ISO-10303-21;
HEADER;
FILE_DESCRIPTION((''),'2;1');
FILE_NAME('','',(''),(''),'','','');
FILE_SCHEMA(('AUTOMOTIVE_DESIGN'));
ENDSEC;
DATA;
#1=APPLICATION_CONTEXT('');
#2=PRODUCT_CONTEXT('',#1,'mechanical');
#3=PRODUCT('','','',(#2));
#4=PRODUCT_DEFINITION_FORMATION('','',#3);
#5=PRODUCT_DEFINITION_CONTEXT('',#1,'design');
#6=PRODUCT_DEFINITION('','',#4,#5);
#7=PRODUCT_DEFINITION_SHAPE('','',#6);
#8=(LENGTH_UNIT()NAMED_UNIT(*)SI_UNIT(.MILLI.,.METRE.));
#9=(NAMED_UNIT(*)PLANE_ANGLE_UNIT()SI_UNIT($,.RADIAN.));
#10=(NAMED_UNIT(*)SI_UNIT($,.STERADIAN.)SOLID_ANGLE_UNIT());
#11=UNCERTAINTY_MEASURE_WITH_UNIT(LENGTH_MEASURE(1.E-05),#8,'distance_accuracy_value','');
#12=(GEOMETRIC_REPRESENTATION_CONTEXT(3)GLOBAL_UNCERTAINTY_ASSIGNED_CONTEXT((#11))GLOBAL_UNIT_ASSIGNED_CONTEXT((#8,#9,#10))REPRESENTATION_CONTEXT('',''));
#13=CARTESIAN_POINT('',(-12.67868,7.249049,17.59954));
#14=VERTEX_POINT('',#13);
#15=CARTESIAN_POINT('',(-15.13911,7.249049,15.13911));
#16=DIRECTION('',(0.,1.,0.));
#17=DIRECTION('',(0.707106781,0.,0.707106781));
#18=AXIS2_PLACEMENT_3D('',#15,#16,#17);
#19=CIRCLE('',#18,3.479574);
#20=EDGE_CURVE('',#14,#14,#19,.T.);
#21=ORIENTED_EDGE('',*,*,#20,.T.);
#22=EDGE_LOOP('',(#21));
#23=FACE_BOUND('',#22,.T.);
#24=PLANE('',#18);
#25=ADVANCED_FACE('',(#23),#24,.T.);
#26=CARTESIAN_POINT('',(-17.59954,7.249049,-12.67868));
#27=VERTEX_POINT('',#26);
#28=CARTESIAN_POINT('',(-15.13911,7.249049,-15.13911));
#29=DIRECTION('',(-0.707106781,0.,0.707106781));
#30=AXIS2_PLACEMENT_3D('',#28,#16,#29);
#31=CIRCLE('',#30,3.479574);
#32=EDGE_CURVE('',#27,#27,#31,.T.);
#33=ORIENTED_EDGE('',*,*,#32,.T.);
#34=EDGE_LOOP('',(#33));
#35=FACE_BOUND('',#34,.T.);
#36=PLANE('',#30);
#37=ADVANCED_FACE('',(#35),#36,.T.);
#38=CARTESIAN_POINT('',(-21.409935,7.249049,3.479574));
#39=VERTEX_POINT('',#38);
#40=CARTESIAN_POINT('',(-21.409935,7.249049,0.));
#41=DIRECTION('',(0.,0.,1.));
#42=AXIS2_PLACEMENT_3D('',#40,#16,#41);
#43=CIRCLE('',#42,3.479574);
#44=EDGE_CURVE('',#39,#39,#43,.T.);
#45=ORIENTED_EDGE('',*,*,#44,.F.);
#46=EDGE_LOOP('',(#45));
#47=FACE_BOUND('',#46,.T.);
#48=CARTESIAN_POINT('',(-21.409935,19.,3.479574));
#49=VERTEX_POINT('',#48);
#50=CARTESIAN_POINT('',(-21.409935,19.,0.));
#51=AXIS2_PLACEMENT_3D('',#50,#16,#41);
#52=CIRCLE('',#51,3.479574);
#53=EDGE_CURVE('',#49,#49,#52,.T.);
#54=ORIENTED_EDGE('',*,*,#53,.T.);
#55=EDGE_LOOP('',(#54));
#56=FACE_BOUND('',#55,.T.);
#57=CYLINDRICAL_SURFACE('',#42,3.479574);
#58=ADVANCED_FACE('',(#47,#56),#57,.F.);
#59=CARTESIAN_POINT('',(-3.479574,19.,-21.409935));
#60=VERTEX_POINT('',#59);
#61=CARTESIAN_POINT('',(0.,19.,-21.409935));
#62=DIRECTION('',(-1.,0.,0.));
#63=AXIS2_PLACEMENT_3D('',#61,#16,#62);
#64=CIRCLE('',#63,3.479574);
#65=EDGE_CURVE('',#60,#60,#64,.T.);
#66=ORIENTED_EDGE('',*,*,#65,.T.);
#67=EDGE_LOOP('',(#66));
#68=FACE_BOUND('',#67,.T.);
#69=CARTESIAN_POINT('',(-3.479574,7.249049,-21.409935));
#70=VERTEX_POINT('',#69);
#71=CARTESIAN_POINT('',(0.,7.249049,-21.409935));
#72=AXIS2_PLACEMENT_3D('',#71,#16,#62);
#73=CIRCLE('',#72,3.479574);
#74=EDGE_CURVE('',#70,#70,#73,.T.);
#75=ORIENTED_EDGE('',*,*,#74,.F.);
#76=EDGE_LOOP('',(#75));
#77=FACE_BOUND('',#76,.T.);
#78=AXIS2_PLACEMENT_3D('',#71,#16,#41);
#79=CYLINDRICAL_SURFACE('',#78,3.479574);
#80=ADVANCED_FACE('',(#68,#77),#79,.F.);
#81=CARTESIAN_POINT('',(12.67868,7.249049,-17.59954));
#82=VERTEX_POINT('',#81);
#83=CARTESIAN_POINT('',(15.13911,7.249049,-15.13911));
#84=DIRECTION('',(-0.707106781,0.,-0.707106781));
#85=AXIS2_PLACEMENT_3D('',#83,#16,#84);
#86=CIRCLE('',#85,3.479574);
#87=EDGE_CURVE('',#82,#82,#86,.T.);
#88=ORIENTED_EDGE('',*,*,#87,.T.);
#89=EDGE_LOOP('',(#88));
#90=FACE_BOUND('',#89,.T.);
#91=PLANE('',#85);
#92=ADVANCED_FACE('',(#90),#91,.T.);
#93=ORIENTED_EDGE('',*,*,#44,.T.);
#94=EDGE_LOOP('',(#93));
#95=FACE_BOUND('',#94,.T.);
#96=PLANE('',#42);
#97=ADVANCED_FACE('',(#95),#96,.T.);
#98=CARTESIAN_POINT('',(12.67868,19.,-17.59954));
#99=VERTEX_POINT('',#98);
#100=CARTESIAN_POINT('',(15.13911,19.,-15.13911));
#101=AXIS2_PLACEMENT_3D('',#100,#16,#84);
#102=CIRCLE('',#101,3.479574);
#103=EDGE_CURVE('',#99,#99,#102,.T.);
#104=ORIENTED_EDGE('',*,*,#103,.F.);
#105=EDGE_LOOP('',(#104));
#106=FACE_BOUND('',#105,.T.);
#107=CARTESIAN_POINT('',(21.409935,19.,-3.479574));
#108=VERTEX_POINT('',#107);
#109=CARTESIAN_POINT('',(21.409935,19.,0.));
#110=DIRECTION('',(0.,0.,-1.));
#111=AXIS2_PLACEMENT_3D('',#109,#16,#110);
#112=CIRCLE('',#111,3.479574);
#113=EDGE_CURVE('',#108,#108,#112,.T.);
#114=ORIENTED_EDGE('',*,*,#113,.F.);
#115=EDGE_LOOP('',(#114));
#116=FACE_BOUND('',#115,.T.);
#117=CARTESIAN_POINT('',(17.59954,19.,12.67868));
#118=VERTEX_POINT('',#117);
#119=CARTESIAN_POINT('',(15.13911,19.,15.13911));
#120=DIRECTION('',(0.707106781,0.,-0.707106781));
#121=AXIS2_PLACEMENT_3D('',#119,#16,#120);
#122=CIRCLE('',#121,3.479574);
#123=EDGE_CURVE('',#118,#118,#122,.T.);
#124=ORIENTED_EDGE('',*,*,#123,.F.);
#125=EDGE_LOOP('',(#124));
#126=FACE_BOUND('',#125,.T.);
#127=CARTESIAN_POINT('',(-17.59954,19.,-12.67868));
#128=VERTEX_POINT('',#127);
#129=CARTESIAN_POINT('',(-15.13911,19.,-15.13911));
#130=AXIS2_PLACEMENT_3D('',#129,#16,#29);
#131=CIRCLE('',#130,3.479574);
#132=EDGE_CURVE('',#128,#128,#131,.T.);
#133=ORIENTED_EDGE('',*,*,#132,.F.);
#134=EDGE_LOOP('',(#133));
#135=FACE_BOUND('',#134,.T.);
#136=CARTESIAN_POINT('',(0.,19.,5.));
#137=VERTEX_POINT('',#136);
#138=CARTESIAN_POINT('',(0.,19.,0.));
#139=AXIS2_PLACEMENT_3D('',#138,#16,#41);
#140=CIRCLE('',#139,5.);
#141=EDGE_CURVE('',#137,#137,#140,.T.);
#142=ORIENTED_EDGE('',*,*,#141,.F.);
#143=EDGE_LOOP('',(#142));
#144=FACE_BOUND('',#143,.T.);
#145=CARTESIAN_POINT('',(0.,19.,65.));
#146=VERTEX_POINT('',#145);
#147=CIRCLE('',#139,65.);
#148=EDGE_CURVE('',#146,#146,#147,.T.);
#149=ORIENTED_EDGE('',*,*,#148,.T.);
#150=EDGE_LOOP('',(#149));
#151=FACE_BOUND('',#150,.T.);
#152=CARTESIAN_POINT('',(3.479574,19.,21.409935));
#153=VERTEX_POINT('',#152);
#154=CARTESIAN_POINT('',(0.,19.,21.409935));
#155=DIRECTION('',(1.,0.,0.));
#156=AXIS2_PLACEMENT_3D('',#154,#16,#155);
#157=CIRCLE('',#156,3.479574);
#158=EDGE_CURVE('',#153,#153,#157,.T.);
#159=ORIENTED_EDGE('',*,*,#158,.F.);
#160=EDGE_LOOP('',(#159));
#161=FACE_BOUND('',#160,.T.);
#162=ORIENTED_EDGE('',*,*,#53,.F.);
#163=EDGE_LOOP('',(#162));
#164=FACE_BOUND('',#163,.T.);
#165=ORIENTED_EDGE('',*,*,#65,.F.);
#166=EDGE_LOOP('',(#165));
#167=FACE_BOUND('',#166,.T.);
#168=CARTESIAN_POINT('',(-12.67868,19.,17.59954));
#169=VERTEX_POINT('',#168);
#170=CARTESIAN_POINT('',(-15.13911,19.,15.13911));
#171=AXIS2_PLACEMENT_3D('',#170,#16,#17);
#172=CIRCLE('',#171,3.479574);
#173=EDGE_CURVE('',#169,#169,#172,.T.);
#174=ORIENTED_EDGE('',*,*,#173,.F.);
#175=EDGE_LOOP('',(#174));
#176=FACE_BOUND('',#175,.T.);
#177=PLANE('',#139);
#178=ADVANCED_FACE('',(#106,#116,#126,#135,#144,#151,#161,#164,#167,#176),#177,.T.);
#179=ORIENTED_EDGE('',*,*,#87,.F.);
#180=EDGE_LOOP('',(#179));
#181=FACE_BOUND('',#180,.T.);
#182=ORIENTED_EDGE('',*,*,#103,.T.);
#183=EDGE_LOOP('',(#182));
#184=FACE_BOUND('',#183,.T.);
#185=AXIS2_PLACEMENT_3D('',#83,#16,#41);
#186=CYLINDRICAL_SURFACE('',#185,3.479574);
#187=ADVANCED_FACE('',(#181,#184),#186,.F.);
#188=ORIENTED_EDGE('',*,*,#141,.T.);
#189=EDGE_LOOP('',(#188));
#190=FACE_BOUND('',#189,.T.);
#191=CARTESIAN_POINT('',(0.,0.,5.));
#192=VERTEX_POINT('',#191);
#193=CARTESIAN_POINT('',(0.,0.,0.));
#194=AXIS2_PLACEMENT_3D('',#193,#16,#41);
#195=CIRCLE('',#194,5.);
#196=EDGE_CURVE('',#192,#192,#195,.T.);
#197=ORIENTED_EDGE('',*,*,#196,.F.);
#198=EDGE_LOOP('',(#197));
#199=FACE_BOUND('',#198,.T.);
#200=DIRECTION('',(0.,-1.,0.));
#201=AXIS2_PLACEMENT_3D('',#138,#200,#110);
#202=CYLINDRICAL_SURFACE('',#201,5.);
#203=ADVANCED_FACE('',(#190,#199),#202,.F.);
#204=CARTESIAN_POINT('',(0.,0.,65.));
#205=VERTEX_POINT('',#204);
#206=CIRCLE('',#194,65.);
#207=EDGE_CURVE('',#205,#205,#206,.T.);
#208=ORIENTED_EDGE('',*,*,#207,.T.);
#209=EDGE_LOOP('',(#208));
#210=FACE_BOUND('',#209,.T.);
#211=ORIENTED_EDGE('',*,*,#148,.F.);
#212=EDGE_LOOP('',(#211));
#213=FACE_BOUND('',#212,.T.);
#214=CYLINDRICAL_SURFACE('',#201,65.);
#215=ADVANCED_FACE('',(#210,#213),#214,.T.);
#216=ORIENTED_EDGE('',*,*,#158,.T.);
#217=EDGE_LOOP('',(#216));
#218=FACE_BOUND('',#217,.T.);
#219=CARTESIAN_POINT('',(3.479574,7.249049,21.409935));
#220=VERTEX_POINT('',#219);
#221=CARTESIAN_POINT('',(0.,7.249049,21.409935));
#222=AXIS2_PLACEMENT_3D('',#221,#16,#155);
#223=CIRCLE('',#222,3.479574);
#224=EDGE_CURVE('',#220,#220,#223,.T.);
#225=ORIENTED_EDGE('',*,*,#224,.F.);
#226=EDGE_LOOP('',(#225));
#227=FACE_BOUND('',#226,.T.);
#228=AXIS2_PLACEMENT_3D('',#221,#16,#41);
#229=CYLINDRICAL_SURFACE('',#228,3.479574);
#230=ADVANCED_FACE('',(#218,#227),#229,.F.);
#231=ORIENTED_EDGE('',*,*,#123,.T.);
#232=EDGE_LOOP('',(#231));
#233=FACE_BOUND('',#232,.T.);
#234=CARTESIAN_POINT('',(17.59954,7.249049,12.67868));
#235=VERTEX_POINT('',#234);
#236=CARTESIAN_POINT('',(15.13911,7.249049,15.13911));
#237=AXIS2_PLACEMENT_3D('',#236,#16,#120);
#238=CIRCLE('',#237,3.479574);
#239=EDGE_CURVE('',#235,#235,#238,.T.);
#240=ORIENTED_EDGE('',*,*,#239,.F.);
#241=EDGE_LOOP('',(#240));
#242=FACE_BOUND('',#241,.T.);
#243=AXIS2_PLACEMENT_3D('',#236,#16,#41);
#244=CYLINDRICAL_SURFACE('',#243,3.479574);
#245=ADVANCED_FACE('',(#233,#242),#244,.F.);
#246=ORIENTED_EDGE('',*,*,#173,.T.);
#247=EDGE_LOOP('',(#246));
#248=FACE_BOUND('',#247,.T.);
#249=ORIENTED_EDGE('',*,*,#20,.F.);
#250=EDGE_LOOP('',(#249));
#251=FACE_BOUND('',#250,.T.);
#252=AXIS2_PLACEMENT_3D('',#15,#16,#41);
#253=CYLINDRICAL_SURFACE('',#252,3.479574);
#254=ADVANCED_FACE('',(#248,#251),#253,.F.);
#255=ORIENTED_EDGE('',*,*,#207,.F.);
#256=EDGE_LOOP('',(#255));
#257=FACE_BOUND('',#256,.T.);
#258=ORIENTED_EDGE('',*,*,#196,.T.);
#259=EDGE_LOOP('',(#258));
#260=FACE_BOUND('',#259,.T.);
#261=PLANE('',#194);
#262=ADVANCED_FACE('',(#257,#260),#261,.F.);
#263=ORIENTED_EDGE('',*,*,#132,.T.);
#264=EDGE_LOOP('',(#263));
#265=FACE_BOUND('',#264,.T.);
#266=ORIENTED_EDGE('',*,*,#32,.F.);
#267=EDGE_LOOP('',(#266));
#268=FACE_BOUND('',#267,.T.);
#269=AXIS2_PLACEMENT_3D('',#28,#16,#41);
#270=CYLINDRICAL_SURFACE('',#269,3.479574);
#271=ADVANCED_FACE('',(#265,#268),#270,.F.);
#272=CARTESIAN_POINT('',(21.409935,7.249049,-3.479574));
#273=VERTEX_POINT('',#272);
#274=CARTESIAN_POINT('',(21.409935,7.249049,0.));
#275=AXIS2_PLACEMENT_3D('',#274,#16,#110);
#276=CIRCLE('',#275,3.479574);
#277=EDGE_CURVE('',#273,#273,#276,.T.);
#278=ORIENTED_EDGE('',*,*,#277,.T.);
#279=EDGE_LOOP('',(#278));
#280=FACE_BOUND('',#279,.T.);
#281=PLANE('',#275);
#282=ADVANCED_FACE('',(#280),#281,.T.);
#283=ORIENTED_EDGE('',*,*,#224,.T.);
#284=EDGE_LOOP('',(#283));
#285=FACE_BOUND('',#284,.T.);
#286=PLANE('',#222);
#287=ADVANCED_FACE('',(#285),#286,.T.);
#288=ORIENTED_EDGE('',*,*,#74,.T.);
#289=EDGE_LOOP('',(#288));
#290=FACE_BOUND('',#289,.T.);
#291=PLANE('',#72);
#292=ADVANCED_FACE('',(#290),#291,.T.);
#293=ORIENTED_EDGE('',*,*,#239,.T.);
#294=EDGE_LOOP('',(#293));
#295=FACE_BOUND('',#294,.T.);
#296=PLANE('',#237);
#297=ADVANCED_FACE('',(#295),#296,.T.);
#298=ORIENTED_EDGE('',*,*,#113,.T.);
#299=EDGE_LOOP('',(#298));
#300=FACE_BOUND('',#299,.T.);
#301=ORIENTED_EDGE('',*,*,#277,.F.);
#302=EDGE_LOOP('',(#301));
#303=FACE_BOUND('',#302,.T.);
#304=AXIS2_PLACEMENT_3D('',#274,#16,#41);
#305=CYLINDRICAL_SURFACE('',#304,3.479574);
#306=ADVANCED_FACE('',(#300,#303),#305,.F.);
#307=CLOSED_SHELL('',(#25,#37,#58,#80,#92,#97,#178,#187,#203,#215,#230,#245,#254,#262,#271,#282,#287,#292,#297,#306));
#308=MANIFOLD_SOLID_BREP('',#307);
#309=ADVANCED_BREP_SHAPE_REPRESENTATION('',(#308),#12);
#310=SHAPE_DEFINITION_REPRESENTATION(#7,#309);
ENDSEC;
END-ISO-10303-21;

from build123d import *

# Parameters (mm, degrees)
SKETCH1_R           = 65
BOSS_EXTRUDE1_DEPTH = 19
SKETCH2_R           = 5
CUT_EXTRUDE1_DEPTH  = 94.866927083
SKETCH3_R           = 3.479573806
CUT_EXTRUDE2_DEPTH  = 11.750950787
CIRPATTERN1_COUNT   = 8


with BuildPart() as part:
    # Sketch1 → Boss-Extrude1 (new body)
    with BuildSketch(Plane(origin=(0, 0, 0), x_dir=(1, 0, 0), z_dir=(0, 1, 0))):
        Circle(SKETCH1_R)
    extrude(amount=BOSS_EXTRUDE1_DEPTH)

    # Sketch2 → Cut-Extrude1 (cut, through all)
    with BuildSketch(Plane(origin=(0, 0, 0), x_dir=(1, 0, 0), z_dir=(0, 1, 0))):
        Circle(SKETCH2_R)
    extrude(amount=CUT_EXTRUDE1_DEPTH, mode=Mode.SUBTRACT)

    # Sketch3 → Cut-Extrude2 (cut)
    with BuildSketch(Plane(origin=(0, 19, 0), x_dir=(1, 0, 0), z_dir=(0, 1, 0))):
        with Locations((-21.40993498, 0)):
            Circle(SKETCH3_R)
    cut_extrude2 = extrude(amount=-CUT_EXTRUDE2_DEPTH, mode=Mode.SUBTRACT)

    # CirPattern1: Cut-Extrude2 ×8 about axis
    cirpattern1_axis = Axis((0, 0, 0), (0, 1, 0))
    for i in range(1, CIRPATTERN1_COUNT):
        add(cut_extrude2.rotate(cirpattern1_axis, i * 360 / CIRPATTERN1_COUNT), mode=Mode.SUBTRACT)


solid = part.part
